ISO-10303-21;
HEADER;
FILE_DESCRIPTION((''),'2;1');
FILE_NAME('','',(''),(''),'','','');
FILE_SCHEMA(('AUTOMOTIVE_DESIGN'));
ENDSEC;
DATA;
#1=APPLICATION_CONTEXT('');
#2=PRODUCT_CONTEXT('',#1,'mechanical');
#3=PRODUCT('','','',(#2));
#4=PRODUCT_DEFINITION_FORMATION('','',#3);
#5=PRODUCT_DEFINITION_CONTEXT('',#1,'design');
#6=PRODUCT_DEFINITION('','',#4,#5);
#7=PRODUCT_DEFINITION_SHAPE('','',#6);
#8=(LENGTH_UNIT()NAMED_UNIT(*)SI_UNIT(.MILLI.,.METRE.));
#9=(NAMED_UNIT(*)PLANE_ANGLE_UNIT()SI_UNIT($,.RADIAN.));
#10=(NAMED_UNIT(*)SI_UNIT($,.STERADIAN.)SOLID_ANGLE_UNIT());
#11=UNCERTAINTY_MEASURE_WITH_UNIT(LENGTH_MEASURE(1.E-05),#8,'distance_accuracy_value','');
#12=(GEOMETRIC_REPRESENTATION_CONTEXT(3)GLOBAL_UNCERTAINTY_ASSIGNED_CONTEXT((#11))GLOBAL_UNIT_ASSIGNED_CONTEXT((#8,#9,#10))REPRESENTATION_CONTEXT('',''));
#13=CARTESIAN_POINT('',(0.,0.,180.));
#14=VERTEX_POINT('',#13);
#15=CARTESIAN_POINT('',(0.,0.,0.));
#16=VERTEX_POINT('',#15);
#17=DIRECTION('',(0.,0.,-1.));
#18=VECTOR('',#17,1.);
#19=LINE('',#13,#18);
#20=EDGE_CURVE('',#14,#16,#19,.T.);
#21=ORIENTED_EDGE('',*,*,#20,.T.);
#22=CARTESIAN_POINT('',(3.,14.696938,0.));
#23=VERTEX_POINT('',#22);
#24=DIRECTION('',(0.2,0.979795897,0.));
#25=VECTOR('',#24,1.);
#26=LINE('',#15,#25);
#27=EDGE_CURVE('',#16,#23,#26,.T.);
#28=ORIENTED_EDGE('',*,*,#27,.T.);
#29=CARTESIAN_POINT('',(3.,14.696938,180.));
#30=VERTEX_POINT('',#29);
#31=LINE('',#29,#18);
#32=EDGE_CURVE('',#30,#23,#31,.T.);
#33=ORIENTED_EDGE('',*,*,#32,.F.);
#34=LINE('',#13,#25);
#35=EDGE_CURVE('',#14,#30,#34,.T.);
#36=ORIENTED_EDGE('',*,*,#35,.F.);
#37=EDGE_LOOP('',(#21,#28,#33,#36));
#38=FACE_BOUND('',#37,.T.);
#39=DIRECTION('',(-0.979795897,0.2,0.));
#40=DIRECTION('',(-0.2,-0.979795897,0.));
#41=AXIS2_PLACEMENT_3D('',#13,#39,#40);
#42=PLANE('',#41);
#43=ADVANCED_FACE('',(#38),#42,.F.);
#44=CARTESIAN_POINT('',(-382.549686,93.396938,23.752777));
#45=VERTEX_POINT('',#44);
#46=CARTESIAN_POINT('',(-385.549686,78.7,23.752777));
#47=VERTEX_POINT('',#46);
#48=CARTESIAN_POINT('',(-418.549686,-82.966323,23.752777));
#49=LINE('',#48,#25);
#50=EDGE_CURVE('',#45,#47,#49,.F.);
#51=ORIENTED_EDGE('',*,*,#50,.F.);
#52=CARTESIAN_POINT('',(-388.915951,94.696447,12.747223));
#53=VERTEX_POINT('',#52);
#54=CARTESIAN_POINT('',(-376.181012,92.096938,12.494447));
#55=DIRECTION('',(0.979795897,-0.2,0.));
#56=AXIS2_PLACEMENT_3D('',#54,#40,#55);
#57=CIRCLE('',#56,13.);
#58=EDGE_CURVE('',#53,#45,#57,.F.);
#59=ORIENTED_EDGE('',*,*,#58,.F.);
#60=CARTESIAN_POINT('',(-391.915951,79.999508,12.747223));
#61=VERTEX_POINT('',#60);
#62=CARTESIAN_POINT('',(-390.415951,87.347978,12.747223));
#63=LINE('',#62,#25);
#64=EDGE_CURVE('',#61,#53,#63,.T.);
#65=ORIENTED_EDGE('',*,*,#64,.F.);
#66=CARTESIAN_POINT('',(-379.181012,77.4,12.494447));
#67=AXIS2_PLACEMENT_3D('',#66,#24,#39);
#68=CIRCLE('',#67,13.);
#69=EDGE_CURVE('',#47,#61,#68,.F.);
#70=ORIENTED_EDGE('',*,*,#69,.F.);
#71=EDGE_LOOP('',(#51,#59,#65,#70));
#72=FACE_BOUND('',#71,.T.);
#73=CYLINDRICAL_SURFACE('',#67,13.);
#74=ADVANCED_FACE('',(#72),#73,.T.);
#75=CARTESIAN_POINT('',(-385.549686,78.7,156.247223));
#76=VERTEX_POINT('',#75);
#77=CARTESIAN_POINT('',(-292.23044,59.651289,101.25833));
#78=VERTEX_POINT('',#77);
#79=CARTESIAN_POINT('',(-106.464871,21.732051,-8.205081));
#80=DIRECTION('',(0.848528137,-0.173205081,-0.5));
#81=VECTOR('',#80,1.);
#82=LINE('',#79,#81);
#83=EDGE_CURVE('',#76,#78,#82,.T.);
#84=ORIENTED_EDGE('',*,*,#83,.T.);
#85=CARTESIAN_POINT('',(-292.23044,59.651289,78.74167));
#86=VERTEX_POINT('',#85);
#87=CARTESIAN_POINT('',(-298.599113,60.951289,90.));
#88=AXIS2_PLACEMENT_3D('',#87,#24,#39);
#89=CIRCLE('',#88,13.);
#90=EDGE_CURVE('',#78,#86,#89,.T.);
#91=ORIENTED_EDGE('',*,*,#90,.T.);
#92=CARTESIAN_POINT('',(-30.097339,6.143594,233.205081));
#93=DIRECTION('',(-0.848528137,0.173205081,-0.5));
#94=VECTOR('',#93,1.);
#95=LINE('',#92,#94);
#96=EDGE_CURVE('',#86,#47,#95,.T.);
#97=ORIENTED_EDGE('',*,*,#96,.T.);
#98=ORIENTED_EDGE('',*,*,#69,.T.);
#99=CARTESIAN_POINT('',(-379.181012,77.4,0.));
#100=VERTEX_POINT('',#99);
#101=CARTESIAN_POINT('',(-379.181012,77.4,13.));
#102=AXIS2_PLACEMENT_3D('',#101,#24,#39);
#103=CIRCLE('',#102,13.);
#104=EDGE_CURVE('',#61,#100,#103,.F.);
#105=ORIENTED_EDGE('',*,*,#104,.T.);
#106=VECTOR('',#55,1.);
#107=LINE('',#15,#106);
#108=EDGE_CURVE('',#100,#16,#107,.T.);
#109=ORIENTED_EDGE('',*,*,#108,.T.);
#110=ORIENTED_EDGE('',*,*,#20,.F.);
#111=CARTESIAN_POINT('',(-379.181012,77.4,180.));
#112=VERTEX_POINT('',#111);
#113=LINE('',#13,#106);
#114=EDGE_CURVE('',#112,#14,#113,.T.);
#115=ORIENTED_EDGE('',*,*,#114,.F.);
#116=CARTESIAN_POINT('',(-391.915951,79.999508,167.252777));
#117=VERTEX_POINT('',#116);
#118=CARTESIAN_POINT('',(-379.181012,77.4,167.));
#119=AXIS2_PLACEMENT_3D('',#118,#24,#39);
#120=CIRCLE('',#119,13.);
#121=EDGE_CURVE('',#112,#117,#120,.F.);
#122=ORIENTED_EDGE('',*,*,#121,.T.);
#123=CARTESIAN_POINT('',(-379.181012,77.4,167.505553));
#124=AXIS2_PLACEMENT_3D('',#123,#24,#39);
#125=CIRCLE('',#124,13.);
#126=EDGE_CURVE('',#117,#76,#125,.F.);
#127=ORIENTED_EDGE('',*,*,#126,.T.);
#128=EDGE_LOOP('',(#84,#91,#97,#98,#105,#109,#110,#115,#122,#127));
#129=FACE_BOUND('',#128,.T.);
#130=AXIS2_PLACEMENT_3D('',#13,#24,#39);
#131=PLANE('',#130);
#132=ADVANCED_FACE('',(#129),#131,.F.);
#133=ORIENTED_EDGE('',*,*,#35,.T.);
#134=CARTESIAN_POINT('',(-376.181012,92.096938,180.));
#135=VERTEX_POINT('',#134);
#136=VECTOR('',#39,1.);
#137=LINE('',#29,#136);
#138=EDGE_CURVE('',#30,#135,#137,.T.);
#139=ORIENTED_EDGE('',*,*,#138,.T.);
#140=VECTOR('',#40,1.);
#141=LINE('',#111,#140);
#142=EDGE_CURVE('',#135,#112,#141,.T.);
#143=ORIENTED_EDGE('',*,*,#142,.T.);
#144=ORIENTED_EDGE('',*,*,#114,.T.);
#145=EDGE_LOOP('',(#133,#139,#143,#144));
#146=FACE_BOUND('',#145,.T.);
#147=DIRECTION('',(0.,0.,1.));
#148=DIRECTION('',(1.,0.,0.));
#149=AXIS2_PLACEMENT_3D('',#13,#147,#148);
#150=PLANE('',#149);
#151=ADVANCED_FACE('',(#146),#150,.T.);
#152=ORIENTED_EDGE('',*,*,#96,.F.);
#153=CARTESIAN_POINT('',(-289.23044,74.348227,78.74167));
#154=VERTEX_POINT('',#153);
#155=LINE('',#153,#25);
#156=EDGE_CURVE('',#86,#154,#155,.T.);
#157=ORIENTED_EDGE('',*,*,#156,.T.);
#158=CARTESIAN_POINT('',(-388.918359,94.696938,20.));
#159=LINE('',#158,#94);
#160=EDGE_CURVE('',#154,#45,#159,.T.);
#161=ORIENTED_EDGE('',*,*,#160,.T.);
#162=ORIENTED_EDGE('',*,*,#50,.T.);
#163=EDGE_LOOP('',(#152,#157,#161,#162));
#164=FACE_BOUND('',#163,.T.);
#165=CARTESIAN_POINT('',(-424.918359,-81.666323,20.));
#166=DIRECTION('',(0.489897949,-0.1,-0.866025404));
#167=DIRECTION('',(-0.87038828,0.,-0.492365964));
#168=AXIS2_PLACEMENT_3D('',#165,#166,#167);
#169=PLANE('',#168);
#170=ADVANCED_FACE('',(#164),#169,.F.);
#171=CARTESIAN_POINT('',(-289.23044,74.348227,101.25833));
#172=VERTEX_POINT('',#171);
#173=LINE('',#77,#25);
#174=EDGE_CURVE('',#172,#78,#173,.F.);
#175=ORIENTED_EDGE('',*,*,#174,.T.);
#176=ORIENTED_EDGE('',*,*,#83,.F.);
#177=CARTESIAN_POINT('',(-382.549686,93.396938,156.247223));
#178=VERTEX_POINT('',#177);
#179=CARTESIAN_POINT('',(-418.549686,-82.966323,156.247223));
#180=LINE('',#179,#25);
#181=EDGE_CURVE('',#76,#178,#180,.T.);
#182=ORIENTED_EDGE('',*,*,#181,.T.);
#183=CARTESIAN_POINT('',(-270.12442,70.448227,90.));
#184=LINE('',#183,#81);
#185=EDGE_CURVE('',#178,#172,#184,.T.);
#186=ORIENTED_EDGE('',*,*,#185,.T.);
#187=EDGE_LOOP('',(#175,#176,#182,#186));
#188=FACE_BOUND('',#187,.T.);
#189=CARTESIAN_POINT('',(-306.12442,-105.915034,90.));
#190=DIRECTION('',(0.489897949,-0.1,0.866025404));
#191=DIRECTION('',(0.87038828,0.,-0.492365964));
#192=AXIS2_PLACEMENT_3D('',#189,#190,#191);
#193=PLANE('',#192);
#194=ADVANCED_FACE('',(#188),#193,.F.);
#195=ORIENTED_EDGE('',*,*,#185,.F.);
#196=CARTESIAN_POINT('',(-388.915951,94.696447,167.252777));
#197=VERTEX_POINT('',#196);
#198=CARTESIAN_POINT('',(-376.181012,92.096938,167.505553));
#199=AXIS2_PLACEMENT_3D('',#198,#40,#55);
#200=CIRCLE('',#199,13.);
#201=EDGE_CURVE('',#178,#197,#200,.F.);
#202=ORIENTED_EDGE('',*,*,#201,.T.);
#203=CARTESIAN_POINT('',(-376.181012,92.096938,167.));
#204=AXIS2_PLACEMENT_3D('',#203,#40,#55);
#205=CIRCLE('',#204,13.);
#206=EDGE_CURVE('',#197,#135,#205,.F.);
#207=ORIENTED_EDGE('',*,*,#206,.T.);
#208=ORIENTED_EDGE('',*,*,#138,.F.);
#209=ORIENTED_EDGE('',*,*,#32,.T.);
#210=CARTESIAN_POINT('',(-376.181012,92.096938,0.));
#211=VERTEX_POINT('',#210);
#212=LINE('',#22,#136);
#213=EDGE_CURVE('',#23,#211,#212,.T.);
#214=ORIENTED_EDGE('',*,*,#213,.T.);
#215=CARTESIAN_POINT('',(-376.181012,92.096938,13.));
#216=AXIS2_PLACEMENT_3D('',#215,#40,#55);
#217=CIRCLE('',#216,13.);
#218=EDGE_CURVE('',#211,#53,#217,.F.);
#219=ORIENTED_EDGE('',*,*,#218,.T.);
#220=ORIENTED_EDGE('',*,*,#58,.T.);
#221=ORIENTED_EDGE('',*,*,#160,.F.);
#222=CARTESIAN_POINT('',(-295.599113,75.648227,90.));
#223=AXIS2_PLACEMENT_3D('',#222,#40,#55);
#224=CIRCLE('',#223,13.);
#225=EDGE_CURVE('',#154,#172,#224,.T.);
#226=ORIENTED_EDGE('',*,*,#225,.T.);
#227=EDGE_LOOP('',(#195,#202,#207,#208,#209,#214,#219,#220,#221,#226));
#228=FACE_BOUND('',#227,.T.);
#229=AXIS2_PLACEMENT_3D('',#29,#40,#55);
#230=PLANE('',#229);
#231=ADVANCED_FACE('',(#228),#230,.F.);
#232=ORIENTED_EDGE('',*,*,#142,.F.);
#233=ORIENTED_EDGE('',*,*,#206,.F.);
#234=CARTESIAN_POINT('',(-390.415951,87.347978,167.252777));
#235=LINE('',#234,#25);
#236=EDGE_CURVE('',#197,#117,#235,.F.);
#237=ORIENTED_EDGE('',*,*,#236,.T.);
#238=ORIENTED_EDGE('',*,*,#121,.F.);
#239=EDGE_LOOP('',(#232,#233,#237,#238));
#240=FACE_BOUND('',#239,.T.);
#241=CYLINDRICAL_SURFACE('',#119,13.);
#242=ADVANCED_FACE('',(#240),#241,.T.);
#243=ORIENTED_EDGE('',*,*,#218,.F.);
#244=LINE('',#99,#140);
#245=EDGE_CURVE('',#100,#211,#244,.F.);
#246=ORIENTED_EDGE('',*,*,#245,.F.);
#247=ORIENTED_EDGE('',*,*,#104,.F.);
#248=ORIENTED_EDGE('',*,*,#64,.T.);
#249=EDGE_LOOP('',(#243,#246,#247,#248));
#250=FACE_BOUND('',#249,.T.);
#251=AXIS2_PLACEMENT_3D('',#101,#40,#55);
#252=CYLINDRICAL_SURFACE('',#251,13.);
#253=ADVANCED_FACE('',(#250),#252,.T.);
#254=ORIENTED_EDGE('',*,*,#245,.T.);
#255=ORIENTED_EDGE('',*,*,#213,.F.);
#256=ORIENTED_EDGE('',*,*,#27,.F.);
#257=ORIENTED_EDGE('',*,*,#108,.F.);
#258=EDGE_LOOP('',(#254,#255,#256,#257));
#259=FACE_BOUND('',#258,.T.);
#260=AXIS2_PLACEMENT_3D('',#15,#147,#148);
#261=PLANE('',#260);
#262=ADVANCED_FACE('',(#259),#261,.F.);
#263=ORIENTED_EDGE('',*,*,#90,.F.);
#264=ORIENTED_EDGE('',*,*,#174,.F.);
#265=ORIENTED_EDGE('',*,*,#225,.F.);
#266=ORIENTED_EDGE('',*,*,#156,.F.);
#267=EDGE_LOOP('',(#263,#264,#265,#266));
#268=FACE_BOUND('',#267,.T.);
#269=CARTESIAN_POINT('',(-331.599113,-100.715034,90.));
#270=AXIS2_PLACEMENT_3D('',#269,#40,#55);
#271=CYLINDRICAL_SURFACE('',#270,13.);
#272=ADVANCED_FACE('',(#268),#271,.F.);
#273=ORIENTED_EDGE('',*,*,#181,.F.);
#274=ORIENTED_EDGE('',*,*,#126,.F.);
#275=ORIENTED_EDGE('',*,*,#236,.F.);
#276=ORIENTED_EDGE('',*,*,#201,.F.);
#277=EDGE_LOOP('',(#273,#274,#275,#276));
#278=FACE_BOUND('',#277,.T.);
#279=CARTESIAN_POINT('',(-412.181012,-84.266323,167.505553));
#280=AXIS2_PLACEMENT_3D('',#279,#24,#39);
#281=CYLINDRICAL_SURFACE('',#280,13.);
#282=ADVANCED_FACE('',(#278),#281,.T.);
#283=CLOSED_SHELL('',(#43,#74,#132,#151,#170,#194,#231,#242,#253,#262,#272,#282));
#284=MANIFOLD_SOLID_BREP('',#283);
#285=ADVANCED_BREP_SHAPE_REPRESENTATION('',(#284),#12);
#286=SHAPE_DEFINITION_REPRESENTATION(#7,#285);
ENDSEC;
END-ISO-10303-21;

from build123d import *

# Parameters (mm, degrees)
BOSS_EXTRUDE3_DEPTH = 180
CUT_EXTRUDE1_DEPTH  = 180
FILLET1_R           = 13
FILLET2_R           = 13


with BuildPart() as part:
    # Sketch1 → Boss-Extrude3 (new body)
    with BuildSketch(Plane.XY):
        Polygon((0, 0), (-391.918358845, 80), (-388.918358845, 94.696938457), (3, 14.696938457), align=None)
    extrude(amount=BOSS_EXTRUDE3_DEPTH)

    # Sketch4 → Cut-Extrude1 (cut)
    with BuildSketch(Plane(origin=(3, 14.696938457, 0), x_dir=(0.9797958971132712, -0.2, 0), z_dir=(0.2, 0.9797958971132712, 0))):
        Polygon((-400, -20), (-278.75644347, -90), (-400, -160), align=None)
    extrude(amount=-CUT_EXTRUDE1_DEPTH, mode=Mode.SUBTRACT)

    # Fillet1
    # the kernel refuses this fillet: 13 mm, written as the material it takes off along each edge
    with BuildSketch(Plane(origin=(-398.418358845, 48.156633344, 0), x_dir=(0.9797958971132713, -0.19999999999999976, 0), z_dir=(0.19999999999999976, 0.9797958971132713, 0)), Plane(origin=(-398.418358845, 48.156633344, 180), x_dir=(0, 0, -1), z_dir=(0.19999999999999976, 0.9797958971132713, 0))) as fillet1_piece_1:
        with BuildLine():
            CenterArc((FILLET1_R, -FILLET1_R), FILLET1_R, 90, 90)
            Line((0, -FILLET1_R), (0, 0))
            Line((0, 0), (FILLET1_R, 0))
        make_face()
    extrude(amount=80, mode=Mode.SUBTRACT)
    with BuildSketch(Plane(origin=(-385.165582096, 113.081714768, 20), x_dir=(0, 0, -1), z_dir=(-0.20000000000000004, -0.9797958971132713, 0)), Plane(origin=(-385.165582096, 113.081714768, 160), x_dir=(0.8485281374238575, -0.17320508075688784, -0.4999999999999992), z_dir=(-0.20000000000000004, -0.9797958971132713, 0))) as fillet1_piece_2:
        with BuildLine():
            CenterArc((FILLET1_R * 0.57735026919, FILLET1_R), FILLET1_R, 210, 60)
            Line((-FILLET1_R * 0.288675134595, FILLET1_R * 0.5), (0, 0))
            Line((0, 0), (FILLET1_R * 0.57735026919, 0))
        make_face()
    extrude(amount=52.527767497, mode=Mode.SUBTRACT)

    # Fillet2
    fillet2_edges = [part.edges().sort_by_distance(p)[0] for p in [
        (-271.624419606, 63.099757922, 90),
    ]]
    fillet(fillet2_edges, radius=FILLET2_R)


solid = part.part
